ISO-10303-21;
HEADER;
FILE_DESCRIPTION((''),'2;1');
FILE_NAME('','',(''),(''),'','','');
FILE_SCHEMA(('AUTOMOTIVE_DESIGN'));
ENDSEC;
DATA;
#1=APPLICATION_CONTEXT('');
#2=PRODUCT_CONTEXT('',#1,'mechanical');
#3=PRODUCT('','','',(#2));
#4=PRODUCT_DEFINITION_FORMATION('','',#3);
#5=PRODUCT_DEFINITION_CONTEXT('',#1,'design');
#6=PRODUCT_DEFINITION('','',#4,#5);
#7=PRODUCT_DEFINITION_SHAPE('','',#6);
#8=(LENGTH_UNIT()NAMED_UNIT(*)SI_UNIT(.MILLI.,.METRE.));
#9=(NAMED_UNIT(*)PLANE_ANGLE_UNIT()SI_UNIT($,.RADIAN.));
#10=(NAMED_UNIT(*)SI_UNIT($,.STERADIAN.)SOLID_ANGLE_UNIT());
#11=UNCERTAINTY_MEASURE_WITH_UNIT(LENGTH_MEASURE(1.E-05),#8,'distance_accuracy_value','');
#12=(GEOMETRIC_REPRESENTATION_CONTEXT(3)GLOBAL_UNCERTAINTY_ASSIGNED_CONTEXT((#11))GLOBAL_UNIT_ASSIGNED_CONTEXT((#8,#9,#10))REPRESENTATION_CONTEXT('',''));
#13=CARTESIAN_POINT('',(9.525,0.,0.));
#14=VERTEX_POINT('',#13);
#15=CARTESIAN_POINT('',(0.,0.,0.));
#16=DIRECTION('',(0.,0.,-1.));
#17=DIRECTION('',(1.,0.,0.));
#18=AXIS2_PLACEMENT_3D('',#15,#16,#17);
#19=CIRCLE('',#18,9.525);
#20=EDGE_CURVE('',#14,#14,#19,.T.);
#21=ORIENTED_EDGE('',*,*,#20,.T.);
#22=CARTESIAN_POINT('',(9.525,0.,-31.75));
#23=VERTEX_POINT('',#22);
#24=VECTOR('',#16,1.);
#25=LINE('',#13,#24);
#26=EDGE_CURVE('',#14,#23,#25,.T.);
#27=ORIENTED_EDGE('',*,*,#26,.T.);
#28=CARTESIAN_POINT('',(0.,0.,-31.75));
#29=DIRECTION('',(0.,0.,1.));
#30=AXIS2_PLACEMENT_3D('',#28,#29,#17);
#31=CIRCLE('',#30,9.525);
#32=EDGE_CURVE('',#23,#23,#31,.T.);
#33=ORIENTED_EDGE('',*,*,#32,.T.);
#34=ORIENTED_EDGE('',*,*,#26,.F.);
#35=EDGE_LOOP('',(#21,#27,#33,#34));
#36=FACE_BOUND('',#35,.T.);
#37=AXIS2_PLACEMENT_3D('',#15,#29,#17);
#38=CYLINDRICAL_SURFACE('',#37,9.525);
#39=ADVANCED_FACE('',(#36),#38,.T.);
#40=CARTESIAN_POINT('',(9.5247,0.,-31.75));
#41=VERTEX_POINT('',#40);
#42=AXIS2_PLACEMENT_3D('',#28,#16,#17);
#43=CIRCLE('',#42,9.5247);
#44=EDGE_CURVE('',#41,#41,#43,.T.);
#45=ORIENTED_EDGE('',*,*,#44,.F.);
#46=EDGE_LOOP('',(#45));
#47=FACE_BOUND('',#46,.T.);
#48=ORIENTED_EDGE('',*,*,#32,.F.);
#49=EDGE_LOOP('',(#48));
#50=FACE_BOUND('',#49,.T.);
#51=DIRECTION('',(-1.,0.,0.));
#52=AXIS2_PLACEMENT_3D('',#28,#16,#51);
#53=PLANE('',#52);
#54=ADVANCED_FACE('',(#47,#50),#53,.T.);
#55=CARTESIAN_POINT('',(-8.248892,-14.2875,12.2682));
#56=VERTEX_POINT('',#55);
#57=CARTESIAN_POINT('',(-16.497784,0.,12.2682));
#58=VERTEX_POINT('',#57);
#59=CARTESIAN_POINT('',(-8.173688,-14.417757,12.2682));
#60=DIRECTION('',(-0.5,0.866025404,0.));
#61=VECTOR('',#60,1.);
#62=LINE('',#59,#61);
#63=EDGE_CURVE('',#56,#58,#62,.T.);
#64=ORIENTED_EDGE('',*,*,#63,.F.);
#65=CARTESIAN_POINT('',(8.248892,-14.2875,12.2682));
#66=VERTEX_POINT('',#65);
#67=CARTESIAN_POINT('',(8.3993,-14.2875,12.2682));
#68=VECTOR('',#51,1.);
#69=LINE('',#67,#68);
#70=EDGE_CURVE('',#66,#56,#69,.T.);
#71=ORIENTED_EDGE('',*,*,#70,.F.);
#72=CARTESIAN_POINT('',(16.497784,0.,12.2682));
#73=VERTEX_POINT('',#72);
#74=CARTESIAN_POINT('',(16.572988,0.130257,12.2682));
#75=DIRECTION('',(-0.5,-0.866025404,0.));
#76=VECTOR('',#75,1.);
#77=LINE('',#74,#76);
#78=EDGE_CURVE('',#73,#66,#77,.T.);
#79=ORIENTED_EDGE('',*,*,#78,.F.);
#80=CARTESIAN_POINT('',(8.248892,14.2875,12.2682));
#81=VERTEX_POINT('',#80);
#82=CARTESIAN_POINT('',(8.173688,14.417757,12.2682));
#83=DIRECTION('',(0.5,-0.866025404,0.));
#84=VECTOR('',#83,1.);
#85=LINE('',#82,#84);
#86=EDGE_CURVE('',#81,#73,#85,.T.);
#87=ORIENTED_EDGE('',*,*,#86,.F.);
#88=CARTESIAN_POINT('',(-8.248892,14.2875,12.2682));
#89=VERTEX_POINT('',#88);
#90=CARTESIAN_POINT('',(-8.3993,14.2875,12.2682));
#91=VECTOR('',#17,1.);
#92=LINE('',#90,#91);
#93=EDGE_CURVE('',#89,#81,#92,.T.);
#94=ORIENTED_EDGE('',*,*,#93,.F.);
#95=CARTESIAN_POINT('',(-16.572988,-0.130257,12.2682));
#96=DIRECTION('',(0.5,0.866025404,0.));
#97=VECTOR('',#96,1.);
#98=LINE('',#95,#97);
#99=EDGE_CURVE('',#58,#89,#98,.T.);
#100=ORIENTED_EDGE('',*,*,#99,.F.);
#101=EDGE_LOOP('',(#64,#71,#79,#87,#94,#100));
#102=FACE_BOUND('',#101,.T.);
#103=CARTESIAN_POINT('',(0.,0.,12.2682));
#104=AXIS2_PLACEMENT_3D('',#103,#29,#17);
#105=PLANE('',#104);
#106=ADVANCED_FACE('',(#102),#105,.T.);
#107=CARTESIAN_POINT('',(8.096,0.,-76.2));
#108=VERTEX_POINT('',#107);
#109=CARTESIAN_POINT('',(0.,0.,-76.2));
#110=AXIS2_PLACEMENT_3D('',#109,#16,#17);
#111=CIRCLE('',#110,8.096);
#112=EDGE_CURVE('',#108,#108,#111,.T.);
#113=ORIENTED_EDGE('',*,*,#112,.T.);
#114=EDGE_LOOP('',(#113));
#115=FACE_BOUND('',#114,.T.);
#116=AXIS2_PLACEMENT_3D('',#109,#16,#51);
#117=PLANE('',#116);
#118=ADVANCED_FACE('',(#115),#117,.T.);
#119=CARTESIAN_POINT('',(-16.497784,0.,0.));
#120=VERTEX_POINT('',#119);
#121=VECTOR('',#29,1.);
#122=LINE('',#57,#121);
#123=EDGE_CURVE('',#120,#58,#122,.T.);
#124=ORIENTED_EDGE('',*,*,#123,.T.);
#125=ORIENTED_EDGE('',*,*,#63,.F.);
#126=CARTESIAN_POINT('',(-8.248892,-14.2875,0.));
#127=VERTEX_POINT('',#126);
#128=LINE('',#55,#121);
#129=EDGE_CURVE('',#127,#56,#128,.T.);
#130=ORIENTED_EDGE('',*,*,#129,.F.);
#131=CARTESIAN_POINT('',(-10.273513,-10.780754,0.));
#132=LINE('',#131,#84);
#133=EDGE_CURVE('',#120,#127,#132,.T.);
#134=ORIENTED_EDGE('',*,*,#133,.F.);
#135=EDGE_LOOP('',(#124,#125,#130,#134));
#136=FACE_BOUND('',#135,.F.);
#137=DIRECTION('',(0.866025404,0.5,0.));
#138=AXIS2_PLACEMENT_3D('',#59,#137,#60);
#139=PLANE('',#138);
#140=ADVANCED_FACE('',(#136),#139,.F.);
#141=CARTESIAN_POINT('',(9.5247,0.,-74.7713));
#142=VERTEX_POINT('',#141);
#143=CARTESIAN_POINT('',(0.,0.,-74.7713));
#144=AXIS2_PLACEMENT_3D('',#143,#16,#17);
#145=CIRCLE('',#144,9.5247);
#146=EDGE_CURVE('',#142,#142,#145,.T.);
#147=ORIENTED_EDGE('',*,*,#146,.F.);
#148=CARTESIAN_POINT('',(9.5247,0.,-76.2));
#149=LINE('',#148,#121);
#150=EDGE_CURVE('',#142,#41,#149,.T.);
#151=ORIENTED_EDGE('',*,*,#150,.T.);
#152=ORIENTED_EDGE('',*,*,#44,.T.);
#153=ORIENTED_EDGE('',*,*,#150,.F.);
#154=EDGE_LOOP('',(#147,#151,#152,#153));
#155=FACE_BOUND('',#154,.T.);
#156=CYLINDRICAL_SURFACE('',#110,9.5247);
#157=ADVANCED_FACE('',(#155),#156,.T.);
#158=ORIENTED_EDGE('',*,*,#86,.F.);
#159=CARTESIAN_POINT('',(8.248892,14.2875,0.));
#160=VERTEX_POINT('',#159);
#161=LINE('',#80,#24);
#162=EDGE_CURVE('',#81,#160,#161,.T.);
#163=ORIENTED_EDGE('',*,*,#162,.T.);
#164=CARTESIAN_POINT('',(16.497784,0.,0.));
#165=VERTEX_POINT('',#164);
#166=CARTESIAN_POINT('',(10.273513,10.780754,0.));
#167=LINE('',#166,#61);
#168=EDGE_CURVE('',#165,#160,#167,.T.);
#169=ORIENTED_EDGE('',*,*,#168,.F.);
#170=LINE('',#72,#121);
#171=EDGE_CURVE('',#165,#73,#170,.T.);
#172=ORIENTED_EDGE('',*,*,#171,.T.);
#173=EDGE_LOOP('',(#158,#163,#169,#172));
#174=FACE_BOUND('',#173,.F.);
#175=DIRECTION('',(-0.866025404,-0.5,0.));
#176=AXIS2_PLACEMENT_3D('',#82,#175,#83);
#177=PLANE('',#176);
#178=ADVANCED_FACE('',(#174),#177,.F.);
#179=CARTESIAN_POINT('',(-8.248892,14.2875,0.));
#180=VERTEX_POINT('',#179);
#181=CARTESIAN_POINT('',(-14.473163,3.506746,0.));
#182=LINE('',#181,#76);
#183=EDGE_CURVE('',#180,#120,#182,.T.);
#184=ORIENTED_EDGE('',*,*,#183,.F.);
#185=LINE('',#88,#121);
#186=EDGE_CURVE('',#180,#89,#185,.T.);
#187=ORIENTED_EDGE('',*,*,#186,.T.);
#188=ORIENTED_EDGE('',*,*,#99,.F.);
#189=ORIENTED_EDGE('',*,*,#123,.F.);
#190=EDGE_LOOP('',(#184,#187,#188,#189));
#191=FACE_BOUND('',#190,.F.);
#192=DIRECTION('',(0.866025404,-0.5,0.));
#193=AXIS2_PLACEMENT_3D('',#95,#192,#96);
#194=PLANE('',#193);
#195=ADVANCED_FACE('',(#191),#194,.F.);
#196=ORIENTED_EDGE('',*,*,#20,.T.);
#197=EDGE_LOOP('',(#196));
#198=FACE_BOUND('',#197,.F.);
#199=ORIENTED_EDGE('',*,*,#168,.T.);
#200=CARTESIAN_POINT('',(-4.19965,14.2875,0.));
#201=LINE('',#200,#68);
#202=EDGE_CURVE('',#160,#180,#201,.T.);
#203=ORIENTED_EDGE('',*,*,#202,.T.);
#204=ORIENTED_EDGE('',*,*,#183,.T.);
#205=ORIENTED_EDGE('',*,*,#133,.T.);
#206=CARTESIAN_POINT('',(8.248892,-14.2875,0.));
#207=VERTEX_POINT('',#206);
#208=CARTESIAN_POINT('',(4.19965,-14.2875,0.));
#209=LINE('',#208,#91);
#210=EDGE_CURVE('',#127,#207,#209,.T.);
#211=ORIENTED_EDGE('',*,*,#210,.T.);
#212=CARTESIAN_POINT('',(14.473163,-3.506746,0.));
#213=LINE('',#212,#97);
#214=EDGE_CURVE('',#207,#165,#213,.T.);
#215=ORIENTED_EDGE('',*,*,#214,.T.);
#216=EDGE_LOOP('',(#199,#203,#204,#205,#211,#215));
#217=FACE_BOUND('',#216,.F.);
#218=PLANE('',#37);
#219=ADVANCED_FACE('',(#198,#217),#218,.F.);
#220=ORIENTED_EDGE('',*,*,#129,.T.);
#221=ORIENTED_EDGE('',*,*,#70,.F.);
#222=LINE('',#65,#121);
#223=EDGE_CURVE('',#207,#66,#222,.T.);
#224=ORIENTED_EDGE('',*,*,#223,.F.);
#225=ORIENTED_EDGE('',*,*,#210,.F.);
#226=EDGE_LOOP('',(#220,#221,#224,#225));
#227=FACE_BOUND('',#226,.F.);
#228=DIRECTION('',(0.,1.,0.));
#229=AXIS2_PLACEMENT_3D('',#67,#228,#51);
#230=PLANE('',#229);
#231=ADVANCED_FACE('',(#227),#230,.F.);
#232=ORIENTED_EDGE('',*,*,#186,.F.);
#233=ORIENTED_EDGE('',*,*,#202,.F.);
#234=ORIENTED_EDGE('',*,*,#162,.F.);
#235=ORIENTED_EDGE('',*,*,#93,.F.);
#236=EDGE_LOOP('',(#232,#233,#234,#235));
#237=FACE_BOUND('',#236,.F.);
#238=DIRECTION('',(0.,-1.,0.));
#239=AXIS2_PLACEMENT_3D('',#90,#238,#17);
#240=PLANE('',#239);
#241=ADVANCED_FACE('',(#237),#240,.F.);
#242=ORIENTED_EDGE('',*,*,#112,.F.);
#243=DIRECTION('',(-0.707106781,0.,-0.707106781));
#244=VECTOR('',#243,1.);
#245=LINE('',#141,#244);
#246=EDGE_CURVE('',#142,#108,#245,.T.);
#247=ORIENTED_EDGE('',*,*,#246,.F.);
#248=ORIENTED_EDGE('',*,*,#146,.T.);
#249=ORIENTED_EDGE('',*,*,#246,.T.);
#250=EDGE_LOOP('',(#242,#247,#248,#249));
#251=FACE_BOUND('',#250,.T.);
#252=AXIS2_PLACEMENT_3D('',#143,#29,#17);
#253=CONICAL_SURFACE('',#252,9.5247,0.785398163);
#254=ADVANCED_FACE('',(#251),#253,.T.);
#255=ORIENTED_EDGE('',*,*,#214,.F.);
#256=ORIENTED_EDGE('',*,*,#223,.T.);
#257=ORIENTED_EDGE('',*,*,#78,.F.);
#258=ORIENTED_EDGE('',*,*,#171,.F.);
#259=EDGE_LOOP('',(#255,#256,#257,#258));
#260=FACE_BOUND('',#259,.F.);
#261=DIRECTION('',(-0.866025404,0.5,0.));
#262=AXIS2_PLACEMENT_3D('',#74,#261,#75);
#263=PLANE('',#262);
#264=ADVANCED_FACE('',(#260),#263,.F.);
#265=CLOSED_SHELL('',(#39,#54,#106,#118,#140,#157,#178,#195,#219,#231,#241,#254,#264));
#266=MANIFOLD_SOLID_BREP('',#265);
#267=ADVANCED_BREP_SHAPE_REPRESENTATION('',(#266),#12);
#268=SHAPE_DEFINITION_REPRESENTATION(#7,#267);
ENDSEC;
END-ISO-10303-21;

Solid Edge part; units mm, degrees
sketch "Sketch1" plane through (0, 0, 0) normal (0, 0, 1) x (1, 0, 0)
  circle A0 centre (0, 0) radius 16.5735
  dimension "D1" = 33.147
extrude "Protrusion1" add sketch "Sketch1" along normal blind 12.2682
sketch "Sketch2" plane through (0, 0, 0) normal (0, 0, -1) x (1, 0, 0)
  circle A0 centre (0, 0) radius 9.525
extrude "Protrusion2" add sketch "Sketch2" along normal blind 76.2
sketch "Sketch3" plane through (0, 0, -76.2) normal (0, 0, -1) x (1, 0, 0)
  circle A0 centre (0, 0) radius 9.5247
extrude "Cutout1" cut sketch "Sketch3" against normal blind 44.45 flip side to cut
chamfer "Chamfer_1" distance 1.4287 angle 45 1 edges at (-9.5247, 0, -76.2)
sketch "Sketch4" plane through (0, 0, 12.2682) normal (0, 0, 1) x (1, 0, 0)
  line L0 (-8.3993, 14.2875) -> (8.3993, 14.2875)
  dimension "D1" = 28.575
extrude "Cutout2" cut sketch "Sketch4" against normal up to next material side at (0, 14.3375, 12.2682)
pattern_circular "Pattern1" count 6 over 360 about axis through (0, 0, 12.2682) along (0, 0, 1) of "Cutout2"
properties part number "120472"
